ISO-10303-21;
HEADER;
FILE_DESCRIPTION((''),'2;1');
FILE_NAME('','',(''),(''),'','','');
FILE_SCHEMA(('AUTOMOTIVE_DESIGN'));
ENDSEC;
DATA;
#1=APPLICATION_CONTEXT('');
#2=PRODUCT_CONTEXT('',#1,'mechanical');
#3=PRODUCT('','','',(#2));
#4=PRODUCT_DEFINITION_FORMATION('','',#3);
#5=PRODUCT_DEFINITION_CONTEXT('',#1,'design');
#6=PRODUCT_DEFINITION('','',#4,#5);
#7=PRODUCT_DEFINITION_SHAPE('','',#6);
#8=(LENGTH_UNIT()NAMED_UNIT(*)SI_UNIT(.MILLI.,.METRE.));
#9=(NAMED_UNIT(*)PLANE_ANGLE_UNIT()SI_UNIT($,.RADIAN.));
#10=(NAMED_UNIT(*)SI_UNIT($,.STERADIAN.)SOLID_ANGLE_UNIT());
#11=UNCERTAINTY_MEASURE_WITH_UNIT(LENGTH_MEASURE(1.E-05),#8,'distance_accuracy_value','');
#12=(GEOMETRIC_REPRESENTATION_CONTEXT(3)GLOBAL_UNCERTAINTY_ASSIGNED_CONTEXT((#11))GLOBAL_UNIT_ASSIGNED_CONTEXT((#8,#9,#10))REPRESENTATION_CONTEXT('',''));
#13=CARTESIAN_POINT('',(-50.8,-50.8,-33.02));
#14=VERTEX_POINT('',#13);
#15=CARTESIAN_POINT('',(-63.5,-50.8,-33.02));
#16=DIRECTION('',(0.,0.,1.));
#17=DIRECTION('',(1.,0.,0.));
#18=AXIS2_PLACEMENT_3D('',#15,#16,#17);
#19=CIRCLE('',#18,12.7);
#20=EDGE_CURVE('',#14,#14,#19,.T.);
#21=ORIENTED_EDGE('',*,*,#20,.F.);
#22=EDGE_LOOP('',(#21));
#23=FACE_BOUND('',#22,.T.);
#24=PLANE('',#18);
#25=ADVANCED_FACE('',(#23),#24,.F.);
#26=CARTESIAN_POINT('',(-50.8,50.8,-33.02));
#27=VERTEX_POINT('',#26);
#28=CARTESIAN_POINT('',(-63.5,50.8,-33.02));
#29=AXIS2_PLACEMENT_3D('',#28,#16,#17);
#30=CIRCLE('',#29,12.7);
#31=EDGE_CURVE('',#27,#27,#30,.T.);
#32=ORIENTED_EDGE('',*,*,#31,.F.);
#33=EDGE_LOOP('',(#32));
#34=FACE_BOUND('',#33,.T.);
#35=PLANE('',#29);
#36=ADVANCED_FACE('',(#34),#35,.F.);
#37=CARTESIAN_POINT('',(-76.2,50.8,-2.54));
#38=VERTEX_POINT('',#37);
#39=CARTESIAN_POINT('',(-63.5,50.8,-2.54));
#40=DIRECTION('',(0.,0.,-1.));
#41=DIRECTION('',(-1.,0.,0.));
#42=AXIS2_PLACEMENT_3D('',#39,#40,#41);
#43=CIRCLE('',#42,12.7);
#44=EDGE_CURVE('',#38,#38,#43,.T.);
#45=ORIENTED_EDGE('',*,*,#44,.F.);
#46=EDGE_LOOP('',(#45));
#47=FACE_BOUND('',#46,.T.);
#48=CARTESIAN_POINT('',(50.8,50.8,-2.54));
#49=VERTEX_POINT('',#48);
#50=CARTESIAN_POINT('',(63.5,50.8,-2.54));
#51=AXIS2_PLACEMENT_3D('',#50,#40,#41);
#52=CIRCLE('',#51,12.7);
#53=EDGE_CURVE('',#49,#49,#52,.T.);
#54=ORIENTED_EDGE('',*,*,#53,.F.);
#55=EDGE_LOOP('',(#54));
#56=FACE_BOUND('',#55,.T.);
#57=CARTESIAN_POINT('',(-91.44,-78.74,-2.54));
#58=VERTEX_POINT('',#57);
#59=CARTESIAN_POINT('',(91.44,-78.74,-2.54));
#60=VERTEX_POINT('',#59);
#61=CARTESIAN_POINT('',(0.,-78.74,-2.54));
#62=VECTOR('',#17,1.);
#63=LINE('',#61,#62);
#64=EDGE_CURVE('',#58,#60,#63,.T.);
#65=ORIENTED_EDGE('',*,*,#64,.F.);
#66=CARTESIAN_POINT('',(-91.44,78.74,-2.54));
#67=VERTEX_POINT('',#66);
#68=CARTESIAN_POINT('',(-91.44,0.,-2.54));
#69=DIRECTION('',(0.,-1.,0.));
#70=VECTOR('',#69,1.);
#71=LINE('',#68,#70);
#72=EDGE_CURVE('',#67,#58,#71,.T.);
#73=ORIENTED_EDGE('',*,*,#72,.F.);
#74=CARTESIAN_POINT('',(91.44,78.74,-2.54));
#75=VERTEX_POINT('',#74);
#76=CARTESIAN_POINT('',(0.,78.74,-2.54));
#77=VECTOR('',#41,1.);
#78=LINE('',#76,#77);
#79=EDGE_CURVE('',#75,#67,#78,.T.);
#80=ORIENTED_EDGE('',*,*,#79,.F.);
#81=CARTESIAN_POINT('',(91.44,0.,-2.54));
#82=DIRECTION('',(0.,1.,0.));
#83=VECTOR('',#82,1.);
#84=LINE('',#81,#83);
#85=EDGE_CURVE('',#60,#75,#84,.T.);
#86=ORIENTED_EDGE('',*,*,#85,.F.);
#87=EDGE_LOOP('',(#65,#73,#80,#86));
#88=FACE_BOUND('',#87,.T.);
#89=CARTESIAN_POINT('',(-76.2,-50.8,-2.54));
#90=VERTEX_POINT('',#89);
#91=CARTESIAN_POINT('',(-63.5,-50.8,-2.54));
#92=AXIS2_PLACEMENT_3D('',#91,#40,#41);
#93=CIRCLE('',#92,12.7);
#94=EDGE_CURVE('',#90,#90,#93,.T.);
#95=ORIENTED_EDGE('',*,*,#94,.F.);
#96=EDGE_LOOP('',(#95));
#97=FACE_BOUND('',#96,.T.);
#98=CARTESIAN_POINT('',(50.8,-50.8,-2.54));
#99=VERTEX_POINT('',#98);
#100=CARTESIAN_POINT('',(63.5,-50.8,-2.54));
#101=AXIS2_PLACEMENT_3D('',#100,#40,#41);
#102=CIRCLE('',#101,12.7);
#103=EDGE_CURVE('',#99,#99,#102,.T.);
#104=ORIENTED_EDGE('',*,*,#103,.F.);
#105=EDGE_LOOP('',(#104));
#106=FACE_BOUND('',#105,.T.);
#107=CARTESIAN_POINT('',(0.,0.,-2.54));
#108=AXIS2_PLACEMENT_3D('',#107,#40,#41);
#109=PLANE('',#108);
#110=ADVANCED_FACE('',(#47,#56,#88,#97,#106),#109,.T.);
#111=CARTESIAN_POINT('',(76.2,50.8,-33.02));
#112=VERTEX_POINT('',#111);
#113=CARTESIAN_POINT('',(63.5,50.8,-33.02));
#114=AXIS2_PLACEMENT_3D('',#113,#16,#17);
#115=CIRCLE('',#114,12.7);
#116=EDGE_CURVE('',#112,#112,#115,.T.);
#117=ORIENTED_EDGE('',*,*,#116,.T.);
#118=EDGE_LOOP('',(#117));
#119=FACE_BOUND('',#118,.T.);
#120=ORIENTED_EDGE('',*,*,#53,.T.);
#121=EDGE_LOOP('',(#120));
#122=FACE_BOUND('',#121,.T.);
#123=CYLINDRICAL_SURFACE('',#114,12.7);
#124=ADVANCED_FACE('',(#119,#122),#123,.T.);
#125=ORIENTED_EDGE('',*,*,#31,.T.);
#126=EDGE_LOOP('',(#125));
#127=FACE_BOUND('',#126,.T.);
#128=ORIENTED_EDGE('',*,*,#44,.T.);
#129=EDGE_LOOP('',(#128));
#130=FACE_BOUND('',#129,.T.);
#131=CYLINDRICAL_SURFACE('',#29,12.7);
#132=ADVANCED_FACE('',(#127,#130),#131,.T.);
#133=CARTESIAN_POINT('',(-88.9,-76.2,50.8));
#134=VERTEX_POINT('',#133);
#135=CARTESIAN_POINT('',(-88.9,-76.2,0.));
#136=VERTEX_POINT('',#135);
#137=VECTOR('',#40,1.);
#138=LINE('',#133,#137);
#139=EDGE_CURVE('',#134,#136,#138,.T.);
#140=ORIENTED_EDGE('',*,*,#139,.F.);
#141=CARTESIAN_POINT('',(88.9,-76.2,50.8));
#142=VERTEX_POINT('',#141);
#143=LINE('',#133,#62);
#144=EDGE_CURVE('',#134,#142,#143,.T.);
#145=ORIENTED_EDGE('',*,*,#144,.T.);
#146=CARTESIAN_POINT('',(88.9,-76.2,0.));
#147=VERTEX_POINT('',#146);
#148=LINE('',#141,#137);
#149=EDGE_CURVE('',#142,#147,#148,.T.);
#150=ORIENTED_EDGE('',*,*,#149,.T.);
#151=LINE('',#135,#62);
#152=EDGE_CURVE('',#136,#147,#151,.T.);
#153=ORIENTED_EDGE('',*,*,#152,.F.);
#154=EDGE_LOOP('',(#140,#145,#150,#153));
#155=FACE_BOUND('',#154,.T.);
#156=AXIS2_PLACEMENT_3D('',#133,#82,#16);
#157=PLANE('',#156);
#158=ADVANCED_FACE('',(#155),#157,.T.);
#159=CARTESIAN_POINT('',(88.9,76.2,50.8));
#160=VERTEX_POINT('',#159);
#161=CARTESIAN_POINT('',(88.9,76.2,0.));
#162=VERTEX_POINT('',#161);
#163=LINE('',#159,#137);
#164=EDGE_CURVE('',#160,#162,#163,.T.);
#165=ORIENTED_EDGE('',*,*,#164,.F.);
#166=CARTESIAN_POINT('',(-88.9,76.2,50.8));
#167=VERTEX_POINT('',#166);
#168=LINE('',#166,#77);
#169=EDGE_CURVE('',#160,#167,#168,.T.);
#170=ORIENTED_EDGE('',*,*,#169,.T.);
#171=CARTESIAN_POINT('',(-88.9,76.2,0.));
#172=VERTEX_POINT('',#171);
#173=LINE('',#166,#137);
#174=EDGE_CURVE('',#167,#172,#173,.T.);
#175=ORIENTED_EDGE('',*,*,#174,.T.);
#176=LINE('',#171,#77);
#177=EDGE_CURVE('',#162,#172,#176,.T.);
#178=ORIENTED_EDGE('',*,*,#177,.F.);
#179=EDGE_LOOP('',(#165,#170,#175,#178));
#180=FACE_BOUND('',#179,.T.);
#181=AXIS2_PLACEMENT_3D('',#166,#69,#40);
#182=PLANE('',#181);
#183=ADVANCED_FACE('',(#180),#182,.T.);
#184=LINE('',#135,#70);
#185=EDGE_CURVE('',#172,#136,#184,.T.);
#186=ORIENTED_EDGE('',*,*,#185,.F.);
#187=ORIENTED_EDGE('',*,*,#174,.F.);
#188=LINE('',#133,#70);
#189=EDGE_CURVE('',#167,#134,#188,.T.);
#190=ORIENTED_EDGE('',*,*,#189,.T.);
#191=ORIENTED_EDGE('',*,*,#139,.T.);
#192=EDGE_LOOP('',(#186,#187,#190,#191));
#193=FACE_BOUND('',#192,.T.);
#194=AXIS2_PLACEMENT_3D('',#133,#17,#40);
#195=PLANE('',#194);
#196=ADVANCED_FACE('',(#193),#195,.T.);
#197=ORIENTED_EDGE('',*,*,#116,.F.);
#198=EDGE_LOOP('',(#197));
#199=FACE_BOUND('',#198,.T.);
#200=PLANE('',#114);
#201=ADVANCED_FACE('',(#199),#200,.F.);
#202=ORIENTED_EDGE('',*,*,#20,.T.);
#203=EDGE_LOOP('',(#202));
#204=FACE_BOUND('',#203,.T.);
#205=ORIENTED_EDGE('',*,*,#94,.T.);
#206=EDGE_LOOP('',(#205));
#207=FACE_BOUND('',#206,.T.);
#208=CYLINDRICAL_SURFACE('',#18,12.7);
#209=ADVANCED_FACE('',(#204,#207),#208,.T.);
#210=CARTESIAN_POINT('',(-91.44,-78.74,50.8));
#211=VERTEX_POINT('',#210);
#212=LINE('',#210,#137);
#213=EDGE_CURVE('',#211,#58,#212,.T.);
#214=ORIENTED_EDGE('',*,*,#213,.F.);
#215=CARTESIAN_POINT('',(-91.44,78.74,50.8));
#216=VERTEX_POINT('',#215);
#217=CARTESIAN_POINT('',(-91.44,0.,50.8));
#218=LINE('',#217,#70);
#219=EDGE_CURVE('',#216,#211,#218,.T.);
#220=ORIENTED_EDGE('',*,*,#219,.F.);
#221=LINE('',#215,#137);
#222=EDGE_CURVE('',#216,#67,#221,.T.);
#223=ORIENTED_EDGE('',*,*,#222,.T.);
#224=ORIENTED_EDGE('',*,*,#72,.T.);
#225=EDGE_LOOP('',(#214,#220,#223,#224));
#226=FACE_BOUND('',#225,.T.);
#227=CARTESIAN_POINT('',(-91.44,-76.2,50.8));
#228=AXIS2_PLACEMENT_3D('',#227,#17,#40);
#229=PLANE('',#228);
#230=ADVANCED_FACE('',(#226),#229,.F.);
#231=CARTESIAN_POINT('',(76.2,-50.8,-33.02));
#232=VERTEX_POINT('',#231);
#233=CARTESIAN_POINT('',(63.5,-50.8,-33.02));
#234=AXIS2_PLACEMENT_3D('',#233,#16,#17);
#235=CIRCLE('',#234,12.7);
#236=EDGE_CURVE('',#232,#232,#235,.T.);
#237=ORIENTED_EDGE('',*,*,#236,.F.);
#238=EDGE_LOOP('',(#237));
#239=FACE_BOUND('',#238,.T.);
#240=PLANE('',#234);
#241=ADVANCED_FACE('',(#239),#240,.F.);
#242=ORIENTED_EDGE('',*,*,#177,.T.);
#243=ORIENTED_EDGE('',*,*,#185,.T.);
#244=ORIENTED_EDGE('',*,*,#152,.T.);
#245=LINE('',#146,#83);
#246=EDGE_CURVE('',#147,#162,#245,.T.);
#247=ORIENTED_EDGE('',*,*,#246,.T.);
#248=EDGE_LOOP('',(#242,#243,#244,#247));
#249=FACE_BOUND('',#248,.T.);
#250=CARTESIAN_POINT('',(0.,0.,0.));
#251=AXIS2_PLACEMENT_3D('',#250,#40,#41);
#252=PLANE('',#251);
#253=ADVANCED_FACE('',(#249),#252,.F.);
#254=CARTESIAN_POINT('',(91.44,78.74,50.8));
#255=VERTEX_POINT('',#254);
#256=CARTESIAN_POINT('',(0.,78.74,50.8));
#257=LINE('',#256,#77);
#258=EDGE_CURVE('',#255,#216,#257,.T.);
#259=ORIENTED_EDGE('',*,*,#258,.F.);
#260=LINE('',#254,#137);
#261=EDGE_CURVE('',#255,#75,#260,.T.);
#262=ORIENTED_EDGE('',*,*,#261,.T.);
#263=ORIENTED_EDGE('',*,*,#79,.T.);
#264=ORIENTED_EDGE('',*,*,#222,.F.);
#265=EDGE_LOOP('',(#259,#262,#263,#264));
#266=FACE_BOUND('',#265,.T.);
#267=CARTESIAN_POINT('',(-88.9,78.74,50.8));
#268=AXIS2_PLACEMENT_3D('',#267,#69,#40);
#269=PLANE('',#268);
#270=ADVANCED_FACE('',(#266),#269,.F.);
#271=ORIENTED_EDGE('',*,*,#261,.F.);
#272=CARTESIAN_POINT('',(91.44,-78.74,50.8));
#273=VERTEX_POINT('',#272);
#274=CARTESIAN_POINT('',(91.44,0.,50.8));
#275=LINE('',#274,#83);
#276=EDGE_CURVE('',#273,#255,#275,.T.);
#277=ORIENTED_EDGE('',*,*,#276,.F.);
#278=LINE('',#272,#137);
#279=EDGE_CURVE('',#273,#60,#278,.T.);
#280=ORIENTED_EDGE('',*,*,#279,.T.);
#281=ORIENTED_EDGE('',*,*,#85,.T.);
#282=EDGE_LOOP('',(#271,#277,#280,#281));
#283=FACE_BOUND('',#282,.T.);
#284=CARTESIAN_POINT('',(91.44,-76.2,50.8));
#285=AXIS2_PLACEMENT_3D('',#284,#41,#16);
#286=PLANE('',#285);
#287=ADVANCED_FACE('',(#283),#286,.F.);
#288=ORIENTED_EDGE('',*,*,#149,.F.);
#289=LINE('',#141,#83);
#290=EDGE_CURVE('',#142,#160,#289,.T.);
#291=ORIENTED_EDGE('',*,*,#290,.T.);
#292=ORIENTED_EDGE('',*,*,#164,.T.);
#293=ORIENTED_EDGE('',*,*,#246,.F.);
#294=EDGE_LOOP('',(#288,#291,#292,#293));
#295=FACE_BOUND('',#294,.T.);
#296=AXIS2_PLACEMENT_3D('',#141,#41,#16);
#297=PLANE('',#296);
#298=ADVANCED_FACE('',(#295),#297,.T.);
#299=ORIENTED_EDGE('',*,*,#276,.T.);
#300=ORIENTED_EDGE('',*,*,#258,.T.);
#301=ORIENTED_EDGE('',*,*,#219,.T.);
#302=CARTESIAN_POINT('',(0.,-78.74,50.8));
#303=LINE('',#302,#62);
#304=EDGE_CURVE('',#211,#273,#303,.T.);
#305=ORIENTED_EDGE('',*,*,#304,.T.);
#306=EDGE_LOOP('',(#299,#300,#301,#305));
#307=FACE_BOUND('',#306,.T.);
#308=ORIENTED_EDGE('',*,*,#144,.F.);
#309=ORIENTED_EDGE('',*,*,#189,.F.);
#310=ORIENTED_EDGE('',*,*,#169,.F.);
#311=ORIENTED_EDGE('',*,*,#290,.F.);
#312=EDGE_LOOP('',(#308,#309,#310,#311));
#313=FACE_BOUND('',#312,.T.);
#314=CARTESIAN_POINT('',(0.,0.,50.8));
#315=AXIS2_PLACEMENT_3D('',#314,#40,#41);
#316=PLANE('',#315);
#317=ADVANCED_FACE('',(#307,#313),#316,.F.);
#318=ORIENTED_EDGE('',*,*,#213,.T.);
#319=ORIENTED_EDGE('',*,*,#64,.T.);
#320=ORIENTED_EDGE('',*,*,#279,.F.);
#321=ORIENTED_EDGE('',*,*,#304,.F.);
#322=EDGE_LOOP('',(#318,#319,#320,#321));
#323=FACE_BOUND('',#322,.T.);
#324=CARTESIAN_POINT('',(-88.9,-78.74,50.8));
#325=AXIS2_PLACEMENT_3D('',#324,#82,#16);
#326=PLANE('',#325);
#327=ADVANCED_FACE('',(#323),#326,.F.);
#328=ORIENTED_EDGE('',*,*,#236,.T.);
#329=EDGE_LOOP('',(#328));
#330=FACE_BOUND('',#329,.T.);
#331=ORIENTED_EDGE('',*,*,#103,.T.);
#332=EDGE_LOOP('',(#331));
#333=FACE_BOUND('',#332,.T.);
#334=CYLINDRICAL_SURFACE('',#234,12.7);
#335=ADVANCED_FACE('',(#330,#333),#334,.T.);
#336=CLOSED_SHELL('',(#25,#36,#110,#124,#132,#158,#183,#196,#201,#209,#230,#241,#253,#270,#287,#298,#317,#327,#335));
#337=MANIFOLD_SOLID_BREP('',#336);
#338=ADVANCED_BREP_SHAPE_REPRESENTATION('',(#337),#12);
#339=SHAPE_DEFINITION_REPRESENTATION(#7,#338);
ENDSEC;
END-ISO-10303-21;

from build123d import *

# Parameters (mm, degrees)
SKETCH2_W               = 177.8
SKETCH2_H               = 152.4
BOSS_EXTRUDE1_DEPTH     = 50.8
SHELL2_T                = 2.54
BOSS_EXTRUDE3_START     = -33.02
BOSS_EXTRUDE3_OUTLINE_R = 12.7
BOSS_EXTRUDE3_DEPTH     = 30.48


# Read off the part's stored shape, not the designer's step: Boss-Extrude3
with BuildPart() as part:
    # Sketch2 → Boss-Extrude1 (new body)
    with BuildSketch(Plane.XY):
        Rectangle(SKETCH2_W, SKETCH2_H)
    extrude(amount=BOSS_EXTRUDE1_DEPTH)

    # Shell2
    shell2_openings = [part.faces().sort_by_distance(p)[0] for p in [
        (0, 0, 50.8),
    ]]
    offset(amount=SHELL2_T, openings=shell2_openings, kind=Kind.INTERSECTION)

    # Boss-Extrude3 outline → Boss-Extrude3 (add)
    with BuildSketch(Plane.XY.offset(BOSS_EXTRUDE3_START)):
        with Locations((-63.5, -50.8)):
            Circle(BOSS_EXTRUDE3_OUTLINE_R)
        with Locations((63.5, -50.8)):
            Circle(BOSS_EXTRUDE3_OUTLINE_R)
        with Locations((63.5, 50.8)):
            Circle(BOSS_EXTRUDE3_OUTLINE_R)
        with Locations((-63.5, 50.8)):
            Circle(BOSS_EXTRUDE3_OUTLINE_R)
    extrude(amount=BOSS_EXTRUDE3_DEPTH)


solid = part.part
